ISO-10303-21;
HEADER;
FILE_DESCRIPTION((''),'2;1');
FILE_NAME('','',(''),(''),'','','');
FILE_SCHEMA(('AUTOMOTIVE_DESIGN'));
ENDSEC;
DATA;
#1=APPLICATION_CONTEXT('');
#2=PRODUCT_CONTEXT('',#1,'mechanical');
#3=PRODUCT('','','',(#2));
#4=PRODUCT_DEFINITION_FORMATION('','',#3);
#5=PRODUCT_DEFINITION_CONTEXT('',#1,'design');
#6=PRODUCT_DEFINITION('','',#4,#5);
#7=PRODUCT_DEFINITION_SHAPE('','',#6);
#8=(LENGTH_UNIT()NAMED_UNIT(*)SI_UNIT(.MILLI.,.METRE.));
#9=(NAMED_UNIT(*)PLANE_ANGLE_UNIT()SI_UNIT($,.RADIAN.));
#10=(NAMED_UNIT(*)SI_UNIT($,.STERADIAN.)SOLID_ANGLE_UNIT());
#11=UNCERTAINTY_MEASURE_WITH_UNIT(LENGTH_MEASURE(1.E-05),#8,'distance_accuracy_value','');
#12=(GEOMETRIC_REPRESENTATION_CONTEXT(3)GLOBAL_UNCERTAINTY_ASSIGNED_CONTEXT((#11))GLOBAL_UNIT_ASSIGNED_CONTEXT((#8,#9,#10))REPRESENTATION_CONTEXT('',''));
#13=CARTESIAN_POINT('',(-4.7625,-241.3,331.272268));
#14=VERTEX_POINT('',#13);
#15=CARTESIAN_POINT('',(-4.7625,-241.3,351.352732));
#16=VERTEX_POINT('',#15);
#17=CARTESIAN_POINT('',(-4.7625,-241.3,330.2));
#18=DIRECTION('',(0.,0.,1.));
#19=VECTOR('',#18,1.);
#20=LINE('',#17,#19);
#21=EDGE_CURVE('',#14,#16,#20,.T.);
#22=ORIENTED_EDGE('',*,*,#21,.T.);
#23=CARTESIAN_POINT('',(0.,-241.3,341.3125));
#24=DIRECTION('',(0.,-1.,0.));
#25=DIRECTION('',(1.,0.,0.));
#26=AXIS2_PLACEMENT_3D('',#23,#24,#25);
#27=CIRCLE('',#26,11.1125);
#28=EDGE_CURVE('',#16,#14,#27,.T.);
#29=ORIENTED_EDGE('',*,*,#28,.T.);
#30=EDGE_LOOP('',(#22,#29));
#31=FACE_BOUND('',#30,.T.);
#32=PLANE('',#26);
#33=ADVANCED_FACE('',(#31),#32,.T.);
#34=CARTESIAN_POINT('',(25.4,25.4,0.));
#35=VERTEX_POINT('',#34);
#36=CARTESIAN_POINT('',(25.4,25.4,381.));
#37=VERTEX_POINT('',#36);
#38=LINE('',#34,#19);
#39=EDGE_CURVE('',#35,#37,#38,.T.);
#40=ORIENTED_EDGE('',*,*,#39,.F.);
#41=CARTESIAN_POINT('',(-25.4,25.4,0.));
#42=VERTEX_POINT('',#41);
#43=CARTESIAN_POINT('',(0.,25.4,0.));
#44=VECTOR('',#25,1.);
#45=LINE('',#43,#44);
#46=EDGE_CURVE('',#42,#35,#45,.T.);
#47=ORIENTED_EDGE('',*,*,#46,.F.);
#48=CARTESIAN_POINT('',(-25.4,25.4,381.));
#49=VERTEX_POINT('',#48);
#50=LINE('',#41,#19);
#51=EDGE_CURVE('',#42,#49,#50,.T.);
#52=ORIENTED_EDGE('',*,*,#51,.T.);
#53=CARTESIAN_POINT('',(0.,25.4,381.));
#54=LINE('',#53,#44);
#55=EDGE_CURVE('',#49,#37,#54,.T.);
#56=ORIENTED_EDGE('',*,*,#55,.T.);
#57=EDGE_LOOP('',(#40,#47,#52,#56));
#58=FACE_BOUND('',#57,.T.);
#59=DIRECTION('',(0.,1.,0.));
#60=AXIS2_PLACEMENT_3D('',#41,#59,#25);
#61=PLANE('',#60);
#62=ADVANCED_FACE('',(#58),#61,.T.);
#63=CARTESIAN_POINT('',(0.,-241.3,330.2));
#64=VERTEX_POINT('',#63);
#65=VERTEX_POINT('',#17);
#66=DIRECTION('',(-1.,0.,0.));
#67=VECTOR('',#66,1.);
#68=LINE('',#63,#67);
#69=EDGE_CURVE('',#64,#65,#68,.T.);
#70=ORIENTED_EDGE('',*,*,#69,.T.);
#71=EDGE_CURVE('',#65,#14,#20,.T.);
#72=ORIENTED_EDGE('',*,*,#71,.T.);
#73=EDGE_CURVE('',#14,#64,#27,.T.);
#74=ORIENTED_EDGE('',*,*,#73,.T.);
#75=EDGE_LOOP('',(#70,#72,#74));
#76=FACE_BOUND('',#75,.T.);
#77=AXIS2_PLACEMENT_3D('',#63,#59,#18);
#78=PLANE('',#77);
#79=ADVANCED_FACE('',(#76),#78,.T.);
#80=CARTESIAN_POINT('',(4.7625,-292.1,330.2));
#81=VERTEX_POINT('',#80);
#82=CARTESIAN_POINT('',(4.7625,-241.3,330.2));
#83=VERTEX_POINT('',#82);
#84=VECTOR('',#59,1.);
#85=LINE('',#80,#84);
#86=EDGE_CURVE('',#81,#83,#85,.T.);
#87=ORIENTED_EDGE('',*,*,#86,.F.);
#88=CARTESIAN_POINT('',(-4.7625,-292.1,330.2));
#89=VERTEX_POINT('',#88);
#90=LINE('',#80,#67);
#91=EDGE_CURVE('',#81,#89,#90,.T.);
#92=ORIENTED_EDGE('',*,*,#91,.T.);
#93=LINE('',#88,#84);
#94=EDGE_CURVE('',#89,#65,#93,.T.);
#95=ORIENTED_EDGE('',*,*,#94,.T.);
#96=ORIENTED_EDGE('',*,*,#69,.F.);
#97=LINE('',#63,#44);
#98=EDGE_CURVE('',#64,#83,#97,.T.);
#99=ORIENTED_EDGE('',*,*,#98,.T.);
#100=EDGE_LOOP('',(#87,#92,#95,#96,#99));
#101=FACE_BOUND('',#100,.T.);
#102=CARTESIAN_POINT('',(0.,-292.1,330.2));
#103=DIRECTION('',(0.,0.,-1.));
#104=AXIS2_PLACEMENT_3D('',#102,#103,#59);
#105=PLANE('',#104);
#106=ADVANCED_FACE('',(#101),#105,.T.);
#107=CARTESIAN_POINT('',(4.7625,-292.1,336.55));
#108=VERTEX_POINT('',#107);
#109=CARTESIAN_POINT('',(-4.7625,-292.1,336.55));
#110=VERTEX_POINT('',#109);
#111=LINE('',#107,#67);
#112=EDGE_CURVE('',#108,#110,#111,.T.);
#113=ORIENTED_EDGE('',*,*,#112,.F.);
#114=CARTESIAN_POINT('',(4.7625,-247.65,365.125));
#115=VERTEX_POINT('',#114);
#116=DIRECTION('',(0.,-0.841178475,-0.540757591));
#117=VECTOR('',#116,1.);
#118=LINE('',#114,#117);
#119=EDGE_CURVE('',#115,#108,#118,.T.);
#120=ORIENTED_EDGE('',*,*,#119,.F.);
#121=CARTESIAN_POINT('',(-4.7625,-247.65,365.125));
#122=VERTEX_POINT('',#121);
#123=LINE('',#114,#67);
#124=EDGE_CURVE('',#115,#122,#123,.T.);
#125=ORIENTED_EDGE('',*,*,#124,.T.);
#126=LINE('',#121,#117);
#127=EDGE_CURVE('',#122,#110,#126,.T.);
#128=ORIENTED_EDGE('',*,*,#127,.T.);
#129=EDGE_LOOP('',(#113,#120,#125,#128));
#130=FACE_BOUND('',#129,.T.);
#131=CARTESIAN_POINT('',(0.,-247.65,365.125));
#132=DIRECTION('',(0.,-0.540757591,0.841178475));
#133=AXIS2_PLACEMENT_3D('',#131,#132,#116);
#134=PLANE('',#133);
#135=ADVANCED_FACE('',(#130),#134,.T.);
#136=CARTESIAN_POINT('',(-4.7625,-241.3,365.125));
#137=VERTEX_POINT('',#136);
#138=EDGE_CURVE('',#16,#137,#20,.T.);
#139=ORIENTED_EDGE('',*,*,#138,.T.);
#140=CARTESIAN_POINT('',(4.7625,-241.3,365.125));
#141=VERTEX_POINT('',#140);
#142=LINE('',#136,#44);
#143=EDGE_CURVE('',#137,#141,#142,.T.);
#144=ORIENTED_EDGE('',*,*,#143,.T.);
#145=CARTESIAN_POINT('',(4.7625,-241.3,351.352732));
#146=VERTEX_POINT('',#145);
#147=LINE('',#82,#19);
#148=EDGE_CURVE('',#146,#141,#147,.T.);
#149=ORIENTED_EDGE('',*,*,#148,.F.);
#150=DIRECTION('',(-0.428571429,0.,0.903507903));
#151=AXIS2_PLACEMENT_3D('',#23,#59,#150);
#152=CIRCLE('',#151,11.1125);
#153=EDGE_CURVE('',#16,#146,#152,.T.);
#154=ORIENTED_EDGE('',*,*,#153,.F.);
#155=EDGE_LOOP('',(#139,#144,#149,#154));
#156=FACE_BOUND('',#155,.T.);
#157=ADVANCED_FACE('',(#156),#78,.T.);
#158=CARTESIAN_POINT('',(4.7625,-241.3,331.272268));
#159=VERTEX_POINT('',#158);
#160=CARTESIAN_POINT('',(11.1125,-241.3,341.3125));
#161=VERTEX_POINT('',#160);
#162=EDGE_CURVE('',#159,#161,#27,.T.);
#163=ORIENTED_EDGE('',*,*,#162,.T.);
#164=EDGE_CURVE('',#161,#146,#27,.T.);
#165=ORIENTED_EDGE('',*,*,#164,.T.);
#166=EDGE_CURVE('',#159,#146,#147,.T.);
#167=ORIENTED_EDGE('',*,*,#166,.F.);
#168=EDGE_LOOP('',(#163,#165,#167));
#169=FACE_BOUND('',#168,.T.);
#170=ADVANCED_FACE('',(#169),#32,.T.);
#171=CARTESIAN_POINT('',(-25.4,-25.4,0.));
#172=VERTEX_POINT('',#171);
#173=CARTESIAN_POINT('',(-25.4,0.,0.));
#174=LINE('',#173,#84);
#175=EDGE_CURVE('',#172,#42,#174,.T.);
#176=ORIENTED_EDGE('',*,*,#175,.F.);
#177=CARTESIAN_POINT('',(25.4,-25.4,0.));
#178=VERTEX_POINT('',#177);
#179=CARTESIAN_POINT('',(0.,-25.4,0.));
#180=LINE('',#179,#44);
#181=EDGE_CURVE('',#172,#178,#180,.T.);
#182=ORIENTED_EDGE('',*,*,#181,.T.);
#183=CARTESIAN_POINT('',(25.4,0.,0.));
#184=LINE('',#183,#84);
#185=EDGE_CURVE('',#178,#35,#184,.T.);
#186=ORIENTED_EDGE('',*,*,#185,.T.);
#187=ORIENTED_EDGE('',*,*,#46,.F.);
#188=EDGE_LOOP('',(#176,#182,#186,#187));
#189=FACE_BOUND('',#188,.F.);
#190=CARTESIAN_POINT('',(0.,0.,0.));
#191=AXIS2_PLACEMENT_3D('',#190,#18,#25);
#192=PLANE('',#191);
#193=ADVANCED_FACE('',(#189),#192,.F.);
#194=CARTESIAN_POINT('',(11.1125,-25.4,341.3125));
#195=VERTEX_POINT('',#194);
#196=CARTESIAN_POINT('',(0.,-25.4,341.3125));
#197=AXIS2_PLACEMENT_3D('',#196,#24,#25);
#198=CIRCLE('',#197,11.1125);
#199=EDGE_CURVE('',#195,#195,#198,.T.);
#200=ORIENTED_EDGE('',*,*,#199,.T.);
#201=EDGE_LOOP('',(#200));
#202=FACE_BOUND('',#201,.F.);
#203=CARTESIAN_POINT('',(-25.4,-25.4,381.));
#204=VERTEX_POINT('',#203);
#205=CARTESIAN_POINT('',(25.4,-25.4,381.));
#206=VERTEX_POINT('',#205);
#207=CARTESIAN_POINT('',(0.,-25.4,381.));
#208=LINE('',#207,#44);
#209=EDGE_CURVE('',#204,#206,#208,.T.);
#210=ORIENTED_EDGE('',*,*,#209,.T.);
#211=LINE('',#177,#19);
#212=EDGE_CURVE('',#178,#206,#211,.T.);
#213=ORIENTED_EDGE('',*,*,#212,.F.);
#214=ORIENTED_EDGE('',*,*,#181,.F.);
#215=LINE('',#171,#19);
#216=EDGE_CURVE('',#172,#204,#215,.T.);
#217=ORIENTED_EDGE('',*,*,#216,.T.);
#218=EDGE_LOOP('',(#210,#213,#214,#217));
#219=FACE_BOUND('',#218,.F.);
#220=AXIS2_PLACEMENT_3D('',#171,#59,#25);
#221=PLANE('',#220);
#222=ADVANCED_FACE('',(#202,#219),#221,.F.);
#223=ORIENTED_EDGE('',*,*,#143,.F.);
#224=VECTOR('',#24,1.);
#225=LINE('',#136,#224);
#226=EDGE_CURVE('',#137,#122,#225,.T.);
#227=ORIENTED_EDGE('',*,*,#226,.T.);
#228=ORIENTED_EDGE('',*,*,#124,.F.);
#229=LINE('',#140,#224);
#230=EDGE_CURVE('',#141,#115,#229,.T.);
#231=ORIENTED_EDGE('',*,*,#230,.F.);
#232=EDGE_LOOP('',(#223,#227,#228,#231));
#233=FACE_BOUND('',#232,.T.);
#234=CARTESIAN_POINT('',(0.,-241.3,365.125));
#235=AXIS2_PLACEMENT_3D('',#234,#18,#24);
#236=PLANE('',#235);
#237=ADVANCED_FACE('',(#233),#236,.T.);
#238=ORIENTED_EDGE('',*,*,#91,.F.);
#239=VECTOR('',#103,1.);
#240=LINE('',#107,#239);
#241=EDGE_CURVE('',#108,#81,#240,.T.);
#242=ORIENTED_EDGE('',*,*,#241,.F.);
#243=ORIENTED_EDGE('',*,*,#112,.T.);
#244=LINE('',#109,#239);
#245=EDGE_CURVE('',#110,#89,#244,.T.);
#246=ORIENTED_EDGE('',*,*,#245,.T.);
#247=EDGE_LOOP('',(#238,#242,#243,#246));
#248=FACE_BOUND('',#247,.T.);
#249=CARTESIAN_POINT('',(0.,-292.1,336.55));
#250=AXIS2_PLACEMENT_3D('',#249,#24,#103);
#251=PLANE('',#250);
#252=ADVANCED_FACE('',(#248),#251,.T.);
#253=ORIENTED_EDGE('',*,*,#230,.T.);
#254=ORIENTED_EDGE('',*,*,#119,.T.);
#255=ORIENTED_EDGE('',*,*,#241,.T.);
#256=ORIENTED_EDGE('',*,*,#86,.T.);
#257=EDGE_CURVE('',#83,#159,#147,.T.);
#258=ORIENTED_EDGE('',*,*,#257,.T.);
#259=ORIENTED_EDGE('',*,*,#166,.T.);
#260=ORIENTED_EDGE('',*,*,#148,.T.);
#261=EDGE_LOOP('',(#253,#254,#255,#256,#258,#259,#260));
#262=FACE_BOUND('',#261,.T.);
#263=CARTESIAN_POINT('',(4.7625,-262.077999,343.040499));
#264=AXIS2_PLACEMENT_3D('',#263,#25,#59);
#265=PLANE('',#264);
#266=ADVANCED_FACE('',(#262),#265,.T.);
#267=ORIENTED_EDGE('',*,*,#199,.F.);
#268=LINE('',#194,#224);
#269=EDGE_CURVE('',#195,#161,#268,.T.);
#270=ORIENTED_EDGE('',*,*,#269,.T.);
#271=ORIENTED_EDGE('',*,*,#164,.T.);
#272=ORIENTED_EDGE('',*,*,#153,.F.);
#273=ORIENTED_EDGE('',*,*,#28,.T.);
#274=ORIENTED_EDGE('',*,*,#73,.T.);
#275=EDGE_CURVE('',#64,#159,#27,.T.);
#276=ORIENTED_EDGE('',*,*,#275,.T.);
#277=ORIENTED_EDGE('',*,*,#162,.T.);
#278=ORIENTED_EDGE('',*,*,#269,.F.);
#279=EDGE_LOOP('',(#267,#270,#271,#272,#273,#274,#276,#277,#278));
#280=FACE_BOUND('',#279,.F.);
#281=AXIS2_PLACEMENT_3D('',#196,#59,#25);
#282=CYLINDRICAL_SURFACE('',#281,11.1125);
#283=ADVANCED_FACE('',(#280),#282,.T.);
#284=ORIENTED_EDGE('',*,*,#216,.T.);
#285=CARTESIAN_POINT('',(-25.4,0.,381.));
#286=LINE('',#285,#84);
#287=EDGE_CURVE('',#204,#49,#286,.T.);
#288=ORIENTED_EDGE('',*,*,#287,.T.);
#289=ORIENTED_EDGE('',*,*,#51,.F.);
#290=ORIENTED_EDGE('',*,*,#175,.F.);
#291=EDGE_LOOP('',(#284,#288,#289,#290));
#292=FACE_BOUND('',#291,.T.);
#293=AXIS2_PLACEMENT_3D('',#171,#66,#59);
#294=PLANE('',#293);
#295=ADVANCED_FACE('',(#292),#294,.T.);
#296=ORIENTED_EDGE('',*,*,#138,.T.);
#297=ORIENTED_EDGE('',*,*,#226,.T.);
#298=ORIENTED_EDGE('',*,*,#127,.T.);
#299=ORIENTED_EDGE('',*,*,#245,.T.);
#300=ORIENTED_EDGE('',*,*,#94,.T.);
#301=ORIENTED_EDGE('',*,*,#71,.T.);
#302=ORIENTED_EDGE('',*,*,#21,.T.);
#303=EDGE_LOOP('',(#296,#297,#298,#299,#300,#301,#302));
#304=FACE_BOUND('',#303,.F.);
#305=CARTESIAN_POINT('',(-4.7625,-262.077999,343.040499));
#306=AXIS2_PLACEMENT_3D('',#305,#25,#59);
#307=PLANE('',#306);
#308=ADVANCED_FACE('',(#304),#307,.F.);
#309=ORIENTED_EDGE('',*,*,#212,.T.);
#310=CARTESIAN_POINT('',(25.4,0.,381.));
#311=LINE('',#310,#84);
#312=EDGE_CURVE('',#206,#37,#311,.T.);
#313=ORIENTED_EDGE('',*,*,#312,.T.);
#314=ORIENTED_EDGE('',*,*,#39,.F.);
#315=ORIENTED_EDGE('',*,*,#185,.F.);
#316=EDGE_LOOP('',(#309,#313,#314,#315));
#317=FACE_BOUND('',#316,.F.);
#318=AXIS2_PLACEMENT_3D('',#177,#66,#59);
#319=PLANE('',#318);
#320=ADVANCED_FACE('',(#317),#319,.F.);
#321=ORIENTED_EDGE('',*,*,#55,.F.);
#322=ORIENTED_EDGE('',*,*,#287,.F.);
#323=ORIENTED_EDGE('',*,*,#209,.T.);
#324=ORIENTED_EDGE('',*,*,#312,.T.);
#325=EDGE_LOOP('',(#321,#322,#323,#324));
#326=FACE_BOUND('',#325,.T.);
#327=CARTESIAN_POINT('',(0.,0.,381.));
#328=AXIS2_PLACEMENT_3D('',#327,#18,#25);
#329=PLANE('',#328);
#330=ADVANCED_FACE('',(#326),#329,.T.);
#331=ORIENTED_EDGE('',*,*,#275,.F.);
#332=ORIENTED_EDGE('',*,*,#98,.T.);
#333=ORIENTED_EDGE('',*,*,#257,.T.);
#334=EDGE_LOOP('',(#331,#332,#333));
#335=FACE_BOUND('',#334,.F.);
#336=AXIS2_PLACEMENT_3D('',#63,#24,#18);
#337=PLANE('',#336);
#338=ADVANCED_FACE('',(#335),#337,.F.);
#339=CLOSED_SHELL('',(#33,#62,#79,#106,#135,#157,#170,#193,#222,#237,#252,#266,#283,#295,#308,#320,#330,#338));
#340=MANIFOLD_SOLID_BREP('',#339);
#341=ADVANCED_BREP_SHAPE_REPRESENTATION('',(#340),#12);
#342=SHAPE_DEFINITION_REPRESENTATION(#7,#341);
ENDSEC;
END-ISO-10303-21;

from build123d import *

# Parameters (mm, degrees)
F0_W          = 50.8
F0_H          = 50.8
F1_DEPTH      = 381
F2_R          = 11.1125
F3_DEPTH      = 215.9
F5_DEPTH      = 4.7625
F5_DEPTH_BACK = 4.7625


# Not quite as in the source:
# - the program builds the solid bodies; features that only make, move or delete a surface that nothing else refers to are left out


with BuildPart() as f1:
    # F0 (on Top) → F1 (new body)
    with BuildSketch(Plane.XY):
        Rectangle(F0_W, F0_H)
    extrude(amount=F1_DEPTH)

    # F2 (on face) → F3 (join)
    with BuildSketch(Plane.XZ.offset(25.4)):
        with Locations((0, 341.3125)):
            Circle(F2_R)
    extrude(amount=F3_DEPTH)

    # F4 (on Right) → F5 (join, two sides)
    with BuildSketch(Plane.YZ) as f5_sk:
        Polygon((-292.1, 330.2), (-241.3, 330.2), (-241.3, 365.125), (-247.65, 365.125), (-292.1, 336.55), align=None)
    extrude(amount=F5_DEPTH)
    extrude(f5_sk.sketch, amount=-F5_DEPTH_BACK)


solid = f1.part
